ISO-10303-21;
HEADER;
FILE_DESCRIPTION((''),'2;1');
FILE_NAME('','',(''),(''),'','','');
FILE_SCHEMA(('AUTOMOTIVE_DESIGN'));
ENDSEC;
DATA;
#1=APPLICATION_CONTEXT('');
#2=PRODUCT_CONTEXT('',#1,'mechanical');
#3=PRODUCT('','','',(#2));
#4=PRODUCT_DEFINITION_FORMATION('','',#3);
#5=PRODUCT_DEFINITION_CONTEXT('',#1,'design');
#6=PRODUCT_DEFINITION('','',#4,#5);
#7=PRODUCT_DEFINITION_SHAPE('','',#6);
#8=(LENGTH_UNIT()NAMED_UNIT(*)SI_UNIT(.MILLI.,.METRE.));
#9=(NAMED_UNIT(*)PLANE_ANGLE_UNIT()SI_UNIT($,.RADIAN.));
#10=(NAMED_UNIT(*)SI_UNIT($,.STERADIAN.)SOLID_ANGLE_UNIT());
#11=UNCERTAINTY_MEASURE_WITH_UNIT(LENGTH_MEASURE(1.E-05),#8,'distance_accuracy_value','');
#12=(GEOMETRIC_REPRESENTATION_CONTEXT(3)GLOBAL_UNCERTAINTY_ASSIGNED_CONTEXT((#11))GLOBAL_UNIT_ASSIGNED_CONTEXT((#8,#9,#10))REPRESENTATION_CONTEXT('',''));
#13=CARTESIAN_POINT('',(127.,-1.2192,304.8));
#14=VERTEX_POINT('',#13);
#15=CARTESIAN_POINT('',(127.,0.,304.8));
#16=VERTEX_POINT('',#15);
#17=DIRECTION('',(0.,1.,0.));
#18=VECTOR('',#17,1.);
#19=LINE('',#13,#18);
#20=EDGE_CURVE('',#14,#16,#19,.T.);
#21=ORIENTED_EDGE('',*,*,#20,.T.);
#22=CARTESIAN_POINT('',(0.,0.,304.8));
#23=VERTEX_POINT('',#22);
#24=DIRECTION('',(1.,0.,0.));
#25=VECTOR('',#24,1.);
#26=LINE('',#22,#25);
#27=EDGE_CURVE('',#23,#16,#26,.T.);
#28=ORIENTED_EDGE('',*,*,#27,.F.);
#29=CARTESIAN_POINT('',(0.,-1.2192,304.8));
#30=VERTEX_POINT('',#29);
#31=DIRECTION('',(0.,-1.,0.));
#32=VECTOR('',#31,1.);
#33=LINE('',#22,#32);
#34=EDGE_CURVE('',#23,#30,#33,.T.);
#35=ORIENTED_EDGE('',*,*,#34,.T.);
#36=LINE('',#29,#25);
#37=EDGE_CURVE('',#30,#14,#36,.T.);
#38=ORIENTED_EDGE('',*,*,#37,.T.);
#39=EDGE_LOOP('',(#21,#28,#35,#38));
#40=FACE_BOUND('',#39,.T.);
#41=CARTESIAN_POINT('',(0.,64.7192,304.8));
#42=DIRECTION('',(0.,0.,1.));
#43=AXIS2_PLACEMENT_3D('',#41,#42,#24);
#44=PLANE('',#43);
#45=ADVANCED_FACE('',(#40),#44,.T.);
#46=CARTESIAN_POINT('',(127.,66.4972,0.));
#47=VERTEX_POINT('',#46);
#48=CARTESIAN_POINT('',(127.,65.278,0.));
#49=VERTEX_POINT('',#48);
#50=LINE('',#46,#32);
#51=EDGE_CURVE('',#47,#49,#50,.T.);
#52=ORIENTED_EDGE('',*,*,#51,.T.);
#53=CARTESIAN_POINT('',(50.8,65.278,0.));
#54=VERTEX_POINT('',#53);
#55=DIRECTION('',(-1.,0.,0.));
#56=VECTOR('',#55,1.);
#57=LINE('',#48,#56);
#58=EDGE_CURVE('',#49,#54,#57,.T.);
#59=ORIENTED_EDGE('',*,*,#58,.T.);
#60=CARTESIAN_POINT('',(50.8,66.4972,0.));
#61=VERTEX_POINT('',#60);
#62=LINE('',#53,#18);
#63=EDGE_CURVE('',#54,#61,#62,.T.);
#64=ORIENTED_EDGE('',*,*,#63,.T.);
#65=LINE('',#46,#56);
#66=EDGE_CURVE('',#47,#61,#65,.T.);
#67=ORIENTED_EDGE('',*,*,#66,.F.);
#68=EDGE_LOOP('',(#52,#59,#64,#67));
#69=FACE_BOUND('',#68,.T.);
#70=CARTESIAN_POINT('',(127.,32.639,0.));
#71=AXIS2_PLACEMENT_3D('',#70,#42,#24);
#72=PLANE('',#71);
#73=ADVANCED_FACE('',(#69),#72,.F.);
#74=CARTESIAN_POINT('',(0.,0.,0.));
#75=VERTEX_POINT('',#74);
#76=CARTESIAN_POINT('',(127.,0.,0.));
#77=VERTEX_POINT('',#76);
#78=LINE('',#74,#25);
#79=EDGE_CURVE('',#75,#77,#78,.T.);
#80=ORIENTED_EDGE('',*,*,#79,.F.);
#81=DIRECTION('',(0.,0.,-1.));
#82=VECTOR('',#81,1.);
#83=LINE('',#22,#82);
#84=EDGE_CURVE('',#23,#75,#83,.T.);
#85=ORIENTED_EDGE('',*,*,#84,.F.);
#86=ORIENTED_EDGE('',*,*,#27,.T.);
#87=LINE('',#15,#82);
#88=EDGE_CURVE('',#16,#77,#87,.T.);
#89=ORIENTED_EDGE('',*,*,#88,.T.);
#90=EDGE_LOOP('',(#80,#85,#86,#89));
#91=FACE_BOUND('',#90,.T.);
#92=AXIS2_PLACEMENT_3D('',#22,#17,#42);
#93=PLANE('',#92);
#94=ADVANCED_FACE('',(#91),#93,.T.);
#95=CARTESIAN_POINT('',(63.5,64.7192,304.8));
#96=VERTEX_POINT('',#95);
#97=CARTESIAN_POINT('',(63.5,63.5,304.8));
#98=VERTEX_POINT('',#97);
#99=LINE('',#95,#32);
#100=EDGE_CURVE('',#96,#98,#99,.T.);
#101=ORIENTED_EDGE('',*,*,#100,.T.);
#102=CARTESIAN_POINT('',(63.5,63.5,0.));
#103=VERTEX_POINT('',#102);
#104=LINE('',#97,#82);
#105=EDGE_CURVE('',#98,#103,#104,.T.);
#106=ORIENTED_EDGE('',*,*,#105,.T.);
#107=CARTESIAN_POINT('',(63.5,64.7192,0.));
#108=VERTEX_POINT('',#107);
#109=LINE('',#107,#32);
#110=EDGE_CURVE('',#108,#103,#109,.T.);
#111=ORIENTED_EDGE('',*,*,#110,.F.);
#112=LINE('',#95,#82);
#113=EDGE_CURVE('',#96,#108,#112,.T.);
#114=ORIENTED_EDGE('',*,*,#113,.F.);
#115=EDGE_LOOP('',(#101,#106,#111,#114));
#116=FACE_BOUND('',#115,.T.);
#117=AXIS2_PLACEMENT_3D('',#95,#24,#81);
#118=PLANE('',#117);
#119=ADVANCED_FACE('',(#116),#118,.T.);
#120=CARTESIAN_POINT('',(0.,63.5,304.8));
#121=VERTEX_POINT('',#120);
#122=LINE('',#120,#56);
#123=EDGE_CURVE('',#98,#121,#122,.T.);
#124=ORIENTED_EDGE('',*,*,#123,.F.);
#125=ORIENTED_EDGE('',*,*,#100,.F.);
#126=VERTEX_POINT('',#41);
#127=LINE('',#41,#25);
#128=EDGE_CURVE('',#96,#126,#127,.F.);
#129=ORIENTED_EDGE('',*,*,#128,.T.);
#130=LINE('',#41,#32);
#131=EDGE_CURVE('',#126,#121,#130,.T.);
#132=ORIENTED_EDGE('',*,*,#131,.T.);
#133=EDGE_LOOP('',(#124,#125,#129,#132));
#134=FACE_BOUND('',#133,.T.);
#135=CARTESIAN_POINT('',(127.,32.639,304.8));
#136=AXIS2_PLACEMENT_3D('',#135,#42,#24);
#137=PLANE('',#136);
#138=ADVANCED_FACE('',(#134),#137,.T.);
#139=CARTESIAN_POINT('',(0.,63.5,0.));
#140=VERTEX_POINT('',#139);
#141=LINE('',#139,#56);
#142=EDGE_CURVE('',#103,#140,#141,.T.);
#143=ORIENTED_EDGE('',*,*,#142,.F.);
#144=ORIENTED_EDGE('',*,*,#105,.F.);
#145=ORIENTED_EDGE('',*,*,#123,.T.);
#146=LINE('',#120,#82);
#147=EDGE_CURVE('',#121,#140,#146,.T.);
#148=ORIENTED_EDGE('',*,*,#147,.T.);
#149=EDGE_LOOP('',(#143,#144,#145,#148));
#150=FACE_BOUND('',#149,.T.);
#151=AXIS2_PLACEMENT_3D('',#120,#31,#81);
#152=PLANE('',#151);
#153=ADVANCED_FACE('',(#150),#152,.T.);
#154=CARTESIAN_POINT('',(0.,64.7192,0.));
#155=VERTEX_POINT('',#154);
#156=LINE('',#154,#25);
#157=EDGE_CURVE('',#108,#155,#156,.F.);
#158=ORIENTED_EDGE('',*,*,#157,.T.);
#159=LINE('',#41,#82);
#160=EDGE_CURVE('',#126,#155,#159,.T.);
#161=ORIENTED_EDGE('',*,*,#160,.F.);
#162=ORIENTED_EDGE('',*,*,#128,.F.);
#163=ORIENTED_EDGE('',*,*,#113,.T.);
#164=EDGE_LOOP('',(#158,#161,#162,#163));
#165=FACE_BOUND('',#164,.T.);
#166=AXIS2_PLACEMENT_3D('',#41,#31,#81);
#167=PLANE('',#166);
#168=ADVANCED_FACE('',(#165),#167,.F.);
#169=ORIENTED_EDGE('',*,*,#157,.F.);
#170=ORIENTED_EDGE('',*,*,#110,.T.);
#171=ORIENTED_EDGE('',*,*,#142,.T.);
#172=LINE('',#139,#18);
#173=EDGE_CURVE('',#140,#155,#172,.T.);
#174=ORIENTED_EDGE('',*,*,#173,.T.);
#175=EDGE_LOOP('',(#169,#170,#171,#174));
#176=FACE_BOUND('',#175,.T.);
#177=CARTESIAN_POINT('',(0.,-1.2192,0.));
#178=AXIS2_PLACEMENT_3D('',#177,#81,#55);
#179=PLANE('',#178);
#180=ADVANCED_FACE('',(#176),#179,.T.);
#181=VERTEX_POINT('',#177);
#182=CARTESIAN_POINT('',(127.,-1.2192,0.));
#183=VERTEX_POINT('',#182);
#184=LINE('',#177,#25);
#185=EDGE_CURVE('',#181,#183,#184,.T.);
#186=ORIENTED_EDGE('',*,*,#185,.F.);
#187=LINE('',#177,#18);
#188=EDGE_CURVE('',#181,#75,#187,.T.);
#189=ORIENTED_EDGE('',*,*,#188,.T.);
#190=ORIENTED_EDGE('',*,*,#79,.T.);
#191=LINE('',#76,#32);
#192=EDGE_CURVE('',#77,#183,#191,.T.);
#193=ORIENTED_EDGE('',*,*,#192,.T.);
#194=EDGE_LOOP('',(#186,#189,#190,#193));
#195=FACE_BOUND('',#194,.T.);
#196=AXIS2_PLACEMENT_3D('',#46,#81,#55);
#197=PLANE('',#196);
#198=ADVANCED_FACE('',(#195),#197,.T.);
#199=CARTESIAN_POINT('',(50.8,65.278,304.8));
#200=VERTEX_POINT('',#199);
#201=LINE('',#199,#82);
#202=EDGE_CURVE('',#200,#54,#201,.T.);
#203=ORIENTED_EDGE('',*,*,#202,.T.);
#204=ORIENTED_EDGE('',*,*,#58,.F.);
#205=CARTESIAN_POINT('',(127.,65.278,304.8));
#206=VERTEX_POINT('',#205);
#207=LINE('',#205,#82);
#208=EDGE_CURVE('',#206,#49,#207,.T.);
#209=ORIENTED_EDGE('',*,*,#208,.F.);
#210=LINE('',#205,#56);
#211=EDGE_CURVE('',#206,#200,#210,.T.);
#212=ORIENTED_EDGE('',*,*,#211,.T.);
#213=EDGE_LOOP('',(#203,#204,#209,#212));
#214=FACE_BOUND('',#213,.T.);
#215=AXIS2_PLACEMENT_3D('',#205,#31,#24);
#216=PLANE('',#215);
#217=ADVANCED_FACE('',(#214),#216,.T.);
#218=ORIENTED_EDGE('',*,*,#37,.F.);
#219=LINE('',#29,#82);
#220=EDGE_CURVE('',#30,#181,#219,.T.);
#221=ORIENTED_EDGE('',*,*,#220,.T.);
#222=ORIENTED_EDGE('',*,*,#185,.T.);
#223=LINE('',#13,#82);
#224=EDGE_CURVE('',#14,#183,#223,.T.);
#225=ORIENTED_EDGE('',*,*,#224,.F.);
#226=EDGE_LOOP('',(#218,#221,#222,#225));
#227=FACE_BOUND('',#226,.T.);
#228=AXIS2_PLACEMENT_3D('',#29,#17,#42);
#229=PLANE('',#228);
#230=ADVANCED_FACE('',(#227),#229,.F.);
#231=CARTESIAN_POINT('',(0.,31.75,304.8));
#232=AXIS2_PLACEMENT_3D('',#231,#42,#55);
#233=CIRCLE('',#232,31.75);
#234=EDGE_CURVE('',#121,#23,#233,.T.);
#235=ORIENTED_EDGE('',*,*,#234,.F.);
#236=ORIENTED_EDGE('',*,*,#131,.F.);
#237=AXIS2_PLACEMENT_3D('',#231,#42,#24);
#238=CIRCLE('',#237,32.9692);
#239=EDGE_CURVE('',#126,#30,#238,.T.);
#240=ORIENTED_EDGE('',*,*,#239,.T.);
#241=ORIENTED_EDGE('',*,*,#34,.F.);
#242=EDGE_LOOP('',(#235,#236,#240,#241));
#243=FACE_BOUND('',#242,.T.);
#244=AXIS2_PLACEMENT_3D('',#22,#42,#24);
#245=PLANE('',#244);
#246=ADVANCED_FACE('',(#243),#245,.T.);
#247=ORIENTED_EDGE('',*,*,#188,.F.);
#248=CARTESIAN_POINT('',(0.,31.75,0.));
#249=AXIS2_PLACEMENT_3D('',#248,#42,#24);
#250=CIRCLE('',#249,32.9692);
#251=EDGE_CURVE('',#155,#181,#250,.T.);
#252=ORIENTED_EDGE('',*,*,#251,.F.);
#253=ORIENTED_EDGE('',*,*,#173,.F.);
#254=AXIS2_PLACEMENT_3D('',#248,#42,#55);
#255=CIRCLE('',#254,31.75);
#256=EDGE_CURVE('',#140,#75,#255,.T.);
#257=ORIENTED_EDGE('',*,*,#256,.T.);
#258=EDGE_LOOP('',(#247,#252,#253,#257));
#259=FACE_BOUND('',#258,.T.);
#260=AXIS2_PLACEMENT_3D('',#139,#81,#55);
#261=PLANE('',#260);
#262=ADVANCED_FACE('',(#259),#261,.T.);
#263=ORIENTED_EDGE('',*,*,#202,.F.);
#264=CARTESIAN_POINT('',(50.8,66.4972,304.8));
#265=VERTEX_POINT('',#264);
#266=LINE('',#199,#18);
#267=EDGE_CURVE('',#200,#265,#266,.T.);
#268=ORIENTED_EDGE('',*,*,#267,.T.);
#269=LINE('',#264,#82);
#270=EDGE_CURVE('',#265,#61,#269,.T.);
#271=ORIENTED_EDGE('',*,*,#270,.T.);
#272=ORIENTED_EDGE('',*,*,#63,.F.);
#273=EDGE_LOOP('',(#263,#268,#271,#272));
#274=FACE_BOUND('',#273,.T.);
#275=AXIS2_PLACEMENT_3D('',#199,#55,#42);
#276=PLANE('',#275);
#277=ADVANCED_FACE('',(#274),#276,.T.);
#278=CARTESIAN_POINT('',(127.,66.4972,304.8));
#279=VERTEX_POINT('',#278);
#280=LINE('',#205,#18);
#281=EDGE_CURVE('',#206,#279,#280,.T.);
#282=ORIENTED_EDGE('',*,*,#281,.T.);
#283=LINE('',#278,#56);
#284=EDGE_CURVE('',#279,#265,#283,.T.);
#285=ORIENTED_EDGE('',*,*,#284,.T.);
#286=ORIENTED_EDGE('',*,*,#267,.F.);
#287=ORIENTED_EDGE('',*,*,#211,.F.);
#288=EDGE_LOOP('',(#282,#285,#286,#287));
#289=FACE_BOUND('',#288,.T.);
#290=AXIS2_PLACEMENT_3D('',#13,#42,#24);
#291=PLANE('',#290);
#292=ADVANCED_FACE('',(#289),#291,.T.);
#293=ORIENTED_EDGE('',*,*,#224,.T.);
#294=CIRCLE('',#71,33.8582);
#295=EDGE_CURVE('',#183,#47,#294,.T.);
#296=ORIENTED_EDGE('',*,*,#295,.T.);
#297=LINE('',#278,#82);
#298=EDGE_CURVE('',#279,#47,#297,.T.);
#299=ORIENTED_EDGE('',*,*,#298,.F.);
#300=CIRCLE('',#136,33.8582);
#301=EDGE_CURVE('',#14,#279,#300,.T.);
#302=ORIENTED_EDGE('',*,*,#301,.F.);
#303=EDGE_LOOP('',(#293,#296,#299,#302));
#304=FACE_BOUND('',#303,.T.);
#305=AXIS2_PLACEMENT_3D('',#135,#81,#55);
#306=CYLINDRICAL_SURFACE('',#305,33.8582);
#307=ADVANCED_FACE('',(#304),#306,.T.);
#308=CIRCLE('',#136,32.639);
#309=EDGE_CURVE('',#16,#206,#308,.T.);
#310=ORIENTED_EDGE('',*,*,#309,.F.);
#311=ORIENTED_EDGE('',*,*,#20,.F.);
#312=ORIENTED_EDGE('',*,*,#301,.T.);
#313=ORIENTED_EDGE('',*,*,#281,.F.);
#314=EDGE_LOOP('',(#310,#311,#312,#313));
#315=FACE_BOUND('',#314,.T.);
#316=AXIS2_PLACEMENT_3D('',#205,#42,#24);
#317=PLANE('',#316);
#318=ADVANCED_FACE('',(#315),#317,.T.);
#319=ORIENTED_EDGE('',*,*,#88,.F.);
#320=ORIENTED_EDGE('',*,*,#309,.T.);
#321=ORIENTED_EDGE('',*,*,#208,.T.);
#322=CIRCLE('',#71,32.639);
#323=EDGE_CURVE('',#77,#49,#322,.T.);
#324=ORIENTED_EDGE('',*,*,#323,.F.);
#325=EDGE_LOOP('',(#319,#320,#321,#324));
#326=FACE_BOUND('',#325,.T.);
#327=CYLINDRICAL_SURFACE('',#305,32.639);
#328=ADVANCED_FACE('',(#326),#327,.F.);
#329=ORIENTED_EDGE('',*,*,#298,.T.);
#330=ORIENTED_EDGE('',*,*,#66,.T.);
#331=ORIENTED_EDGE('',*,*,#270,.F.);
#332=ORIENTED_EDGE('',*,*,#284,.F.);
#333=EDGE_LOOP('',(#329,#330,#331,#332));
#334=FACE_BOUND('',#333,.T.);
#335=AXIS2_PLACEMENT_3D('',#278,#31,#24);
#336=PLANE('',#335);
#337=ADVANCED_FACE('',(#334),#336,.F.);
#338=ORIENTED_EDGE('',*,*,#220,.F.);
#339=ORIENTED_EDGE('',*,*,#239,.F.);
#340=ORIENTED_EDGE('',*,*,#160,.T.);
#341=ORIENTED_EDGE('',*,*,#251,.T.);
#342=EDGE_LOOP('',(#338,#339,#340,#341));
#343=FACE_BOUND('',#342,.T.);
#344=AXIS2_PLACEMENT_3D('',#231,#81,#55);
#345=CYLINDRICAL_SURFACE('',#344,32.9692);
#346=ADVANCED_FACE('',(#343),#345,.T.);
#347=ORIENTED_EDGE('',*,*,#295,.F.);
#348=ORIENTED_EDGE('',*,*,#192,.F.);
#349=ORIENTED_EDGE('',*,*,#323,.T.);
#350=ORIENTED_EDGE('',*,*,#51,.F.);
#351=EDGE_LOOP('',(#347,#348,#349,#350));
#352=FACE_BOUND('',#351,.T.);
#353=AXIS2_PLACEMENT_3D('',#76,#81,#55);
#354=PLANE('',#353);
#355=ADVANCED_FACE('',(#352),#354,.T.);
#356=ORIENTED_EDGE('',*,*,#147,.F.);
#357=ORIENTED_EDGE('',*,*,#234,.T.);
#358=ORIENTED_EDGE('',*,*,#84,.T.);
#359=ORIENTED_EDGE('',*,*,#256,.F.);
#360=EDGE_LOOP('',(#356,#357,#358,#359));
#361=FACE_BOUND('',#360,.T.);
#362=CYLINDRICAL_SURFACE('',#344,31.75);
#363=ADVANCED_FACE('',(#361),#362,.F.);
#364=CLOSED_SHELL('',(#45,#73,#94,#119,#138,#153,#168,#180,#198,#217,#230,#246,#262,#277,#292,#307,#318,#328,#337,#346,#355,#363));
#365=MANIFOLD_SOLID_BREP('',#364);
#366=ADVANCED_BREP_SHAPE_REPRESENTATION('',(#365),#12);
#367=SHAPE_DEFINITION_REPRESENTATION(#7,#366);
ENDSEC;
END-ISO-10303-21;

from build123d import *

# Parameters (mm, degrees)
BASE_FLANGE1_DEPTH = 304.8


# Sheet-metal steps are written as plain solids
with BuildPart() as part:
    # Sketch2 → Base-Flange1 (new body)
    with BuildSketch(Plane.XY):
        with BuildLine():
            Line((63.5, 63.5), (0, 63.5))
            ThreePointArc((0, 63.5), (-31.75, 31.75), (0, 0))
            Line((0, 0), (127, 0))
            ThreePointArc((127, 0), (159.639, 32.639), (127, 65.278))
            Line((127, 65.278), (50.8, 65.278))
            Line((50.8, 65.278), (50.8, 66.4972))
            Line((50.8, 66.4972), (127, 66.4972))
            ThreePointArc((127, 66.4972), (160.8582, 32.639), (127, -1.2192))
            Line((127, -1.2192), (0, -1.2192))
            ThreePointArc((0, -1.2192), (-32.9692, 31.75), (0, 64.7192))
            Line((0, 64.7192), (63.5, 64.7192))
            Line((63.5, 64.7192), (63.5, 63.5))
        make_face()
    extrude(amount=BASE_FLANGE1_DEPTH)


solid = part.part
